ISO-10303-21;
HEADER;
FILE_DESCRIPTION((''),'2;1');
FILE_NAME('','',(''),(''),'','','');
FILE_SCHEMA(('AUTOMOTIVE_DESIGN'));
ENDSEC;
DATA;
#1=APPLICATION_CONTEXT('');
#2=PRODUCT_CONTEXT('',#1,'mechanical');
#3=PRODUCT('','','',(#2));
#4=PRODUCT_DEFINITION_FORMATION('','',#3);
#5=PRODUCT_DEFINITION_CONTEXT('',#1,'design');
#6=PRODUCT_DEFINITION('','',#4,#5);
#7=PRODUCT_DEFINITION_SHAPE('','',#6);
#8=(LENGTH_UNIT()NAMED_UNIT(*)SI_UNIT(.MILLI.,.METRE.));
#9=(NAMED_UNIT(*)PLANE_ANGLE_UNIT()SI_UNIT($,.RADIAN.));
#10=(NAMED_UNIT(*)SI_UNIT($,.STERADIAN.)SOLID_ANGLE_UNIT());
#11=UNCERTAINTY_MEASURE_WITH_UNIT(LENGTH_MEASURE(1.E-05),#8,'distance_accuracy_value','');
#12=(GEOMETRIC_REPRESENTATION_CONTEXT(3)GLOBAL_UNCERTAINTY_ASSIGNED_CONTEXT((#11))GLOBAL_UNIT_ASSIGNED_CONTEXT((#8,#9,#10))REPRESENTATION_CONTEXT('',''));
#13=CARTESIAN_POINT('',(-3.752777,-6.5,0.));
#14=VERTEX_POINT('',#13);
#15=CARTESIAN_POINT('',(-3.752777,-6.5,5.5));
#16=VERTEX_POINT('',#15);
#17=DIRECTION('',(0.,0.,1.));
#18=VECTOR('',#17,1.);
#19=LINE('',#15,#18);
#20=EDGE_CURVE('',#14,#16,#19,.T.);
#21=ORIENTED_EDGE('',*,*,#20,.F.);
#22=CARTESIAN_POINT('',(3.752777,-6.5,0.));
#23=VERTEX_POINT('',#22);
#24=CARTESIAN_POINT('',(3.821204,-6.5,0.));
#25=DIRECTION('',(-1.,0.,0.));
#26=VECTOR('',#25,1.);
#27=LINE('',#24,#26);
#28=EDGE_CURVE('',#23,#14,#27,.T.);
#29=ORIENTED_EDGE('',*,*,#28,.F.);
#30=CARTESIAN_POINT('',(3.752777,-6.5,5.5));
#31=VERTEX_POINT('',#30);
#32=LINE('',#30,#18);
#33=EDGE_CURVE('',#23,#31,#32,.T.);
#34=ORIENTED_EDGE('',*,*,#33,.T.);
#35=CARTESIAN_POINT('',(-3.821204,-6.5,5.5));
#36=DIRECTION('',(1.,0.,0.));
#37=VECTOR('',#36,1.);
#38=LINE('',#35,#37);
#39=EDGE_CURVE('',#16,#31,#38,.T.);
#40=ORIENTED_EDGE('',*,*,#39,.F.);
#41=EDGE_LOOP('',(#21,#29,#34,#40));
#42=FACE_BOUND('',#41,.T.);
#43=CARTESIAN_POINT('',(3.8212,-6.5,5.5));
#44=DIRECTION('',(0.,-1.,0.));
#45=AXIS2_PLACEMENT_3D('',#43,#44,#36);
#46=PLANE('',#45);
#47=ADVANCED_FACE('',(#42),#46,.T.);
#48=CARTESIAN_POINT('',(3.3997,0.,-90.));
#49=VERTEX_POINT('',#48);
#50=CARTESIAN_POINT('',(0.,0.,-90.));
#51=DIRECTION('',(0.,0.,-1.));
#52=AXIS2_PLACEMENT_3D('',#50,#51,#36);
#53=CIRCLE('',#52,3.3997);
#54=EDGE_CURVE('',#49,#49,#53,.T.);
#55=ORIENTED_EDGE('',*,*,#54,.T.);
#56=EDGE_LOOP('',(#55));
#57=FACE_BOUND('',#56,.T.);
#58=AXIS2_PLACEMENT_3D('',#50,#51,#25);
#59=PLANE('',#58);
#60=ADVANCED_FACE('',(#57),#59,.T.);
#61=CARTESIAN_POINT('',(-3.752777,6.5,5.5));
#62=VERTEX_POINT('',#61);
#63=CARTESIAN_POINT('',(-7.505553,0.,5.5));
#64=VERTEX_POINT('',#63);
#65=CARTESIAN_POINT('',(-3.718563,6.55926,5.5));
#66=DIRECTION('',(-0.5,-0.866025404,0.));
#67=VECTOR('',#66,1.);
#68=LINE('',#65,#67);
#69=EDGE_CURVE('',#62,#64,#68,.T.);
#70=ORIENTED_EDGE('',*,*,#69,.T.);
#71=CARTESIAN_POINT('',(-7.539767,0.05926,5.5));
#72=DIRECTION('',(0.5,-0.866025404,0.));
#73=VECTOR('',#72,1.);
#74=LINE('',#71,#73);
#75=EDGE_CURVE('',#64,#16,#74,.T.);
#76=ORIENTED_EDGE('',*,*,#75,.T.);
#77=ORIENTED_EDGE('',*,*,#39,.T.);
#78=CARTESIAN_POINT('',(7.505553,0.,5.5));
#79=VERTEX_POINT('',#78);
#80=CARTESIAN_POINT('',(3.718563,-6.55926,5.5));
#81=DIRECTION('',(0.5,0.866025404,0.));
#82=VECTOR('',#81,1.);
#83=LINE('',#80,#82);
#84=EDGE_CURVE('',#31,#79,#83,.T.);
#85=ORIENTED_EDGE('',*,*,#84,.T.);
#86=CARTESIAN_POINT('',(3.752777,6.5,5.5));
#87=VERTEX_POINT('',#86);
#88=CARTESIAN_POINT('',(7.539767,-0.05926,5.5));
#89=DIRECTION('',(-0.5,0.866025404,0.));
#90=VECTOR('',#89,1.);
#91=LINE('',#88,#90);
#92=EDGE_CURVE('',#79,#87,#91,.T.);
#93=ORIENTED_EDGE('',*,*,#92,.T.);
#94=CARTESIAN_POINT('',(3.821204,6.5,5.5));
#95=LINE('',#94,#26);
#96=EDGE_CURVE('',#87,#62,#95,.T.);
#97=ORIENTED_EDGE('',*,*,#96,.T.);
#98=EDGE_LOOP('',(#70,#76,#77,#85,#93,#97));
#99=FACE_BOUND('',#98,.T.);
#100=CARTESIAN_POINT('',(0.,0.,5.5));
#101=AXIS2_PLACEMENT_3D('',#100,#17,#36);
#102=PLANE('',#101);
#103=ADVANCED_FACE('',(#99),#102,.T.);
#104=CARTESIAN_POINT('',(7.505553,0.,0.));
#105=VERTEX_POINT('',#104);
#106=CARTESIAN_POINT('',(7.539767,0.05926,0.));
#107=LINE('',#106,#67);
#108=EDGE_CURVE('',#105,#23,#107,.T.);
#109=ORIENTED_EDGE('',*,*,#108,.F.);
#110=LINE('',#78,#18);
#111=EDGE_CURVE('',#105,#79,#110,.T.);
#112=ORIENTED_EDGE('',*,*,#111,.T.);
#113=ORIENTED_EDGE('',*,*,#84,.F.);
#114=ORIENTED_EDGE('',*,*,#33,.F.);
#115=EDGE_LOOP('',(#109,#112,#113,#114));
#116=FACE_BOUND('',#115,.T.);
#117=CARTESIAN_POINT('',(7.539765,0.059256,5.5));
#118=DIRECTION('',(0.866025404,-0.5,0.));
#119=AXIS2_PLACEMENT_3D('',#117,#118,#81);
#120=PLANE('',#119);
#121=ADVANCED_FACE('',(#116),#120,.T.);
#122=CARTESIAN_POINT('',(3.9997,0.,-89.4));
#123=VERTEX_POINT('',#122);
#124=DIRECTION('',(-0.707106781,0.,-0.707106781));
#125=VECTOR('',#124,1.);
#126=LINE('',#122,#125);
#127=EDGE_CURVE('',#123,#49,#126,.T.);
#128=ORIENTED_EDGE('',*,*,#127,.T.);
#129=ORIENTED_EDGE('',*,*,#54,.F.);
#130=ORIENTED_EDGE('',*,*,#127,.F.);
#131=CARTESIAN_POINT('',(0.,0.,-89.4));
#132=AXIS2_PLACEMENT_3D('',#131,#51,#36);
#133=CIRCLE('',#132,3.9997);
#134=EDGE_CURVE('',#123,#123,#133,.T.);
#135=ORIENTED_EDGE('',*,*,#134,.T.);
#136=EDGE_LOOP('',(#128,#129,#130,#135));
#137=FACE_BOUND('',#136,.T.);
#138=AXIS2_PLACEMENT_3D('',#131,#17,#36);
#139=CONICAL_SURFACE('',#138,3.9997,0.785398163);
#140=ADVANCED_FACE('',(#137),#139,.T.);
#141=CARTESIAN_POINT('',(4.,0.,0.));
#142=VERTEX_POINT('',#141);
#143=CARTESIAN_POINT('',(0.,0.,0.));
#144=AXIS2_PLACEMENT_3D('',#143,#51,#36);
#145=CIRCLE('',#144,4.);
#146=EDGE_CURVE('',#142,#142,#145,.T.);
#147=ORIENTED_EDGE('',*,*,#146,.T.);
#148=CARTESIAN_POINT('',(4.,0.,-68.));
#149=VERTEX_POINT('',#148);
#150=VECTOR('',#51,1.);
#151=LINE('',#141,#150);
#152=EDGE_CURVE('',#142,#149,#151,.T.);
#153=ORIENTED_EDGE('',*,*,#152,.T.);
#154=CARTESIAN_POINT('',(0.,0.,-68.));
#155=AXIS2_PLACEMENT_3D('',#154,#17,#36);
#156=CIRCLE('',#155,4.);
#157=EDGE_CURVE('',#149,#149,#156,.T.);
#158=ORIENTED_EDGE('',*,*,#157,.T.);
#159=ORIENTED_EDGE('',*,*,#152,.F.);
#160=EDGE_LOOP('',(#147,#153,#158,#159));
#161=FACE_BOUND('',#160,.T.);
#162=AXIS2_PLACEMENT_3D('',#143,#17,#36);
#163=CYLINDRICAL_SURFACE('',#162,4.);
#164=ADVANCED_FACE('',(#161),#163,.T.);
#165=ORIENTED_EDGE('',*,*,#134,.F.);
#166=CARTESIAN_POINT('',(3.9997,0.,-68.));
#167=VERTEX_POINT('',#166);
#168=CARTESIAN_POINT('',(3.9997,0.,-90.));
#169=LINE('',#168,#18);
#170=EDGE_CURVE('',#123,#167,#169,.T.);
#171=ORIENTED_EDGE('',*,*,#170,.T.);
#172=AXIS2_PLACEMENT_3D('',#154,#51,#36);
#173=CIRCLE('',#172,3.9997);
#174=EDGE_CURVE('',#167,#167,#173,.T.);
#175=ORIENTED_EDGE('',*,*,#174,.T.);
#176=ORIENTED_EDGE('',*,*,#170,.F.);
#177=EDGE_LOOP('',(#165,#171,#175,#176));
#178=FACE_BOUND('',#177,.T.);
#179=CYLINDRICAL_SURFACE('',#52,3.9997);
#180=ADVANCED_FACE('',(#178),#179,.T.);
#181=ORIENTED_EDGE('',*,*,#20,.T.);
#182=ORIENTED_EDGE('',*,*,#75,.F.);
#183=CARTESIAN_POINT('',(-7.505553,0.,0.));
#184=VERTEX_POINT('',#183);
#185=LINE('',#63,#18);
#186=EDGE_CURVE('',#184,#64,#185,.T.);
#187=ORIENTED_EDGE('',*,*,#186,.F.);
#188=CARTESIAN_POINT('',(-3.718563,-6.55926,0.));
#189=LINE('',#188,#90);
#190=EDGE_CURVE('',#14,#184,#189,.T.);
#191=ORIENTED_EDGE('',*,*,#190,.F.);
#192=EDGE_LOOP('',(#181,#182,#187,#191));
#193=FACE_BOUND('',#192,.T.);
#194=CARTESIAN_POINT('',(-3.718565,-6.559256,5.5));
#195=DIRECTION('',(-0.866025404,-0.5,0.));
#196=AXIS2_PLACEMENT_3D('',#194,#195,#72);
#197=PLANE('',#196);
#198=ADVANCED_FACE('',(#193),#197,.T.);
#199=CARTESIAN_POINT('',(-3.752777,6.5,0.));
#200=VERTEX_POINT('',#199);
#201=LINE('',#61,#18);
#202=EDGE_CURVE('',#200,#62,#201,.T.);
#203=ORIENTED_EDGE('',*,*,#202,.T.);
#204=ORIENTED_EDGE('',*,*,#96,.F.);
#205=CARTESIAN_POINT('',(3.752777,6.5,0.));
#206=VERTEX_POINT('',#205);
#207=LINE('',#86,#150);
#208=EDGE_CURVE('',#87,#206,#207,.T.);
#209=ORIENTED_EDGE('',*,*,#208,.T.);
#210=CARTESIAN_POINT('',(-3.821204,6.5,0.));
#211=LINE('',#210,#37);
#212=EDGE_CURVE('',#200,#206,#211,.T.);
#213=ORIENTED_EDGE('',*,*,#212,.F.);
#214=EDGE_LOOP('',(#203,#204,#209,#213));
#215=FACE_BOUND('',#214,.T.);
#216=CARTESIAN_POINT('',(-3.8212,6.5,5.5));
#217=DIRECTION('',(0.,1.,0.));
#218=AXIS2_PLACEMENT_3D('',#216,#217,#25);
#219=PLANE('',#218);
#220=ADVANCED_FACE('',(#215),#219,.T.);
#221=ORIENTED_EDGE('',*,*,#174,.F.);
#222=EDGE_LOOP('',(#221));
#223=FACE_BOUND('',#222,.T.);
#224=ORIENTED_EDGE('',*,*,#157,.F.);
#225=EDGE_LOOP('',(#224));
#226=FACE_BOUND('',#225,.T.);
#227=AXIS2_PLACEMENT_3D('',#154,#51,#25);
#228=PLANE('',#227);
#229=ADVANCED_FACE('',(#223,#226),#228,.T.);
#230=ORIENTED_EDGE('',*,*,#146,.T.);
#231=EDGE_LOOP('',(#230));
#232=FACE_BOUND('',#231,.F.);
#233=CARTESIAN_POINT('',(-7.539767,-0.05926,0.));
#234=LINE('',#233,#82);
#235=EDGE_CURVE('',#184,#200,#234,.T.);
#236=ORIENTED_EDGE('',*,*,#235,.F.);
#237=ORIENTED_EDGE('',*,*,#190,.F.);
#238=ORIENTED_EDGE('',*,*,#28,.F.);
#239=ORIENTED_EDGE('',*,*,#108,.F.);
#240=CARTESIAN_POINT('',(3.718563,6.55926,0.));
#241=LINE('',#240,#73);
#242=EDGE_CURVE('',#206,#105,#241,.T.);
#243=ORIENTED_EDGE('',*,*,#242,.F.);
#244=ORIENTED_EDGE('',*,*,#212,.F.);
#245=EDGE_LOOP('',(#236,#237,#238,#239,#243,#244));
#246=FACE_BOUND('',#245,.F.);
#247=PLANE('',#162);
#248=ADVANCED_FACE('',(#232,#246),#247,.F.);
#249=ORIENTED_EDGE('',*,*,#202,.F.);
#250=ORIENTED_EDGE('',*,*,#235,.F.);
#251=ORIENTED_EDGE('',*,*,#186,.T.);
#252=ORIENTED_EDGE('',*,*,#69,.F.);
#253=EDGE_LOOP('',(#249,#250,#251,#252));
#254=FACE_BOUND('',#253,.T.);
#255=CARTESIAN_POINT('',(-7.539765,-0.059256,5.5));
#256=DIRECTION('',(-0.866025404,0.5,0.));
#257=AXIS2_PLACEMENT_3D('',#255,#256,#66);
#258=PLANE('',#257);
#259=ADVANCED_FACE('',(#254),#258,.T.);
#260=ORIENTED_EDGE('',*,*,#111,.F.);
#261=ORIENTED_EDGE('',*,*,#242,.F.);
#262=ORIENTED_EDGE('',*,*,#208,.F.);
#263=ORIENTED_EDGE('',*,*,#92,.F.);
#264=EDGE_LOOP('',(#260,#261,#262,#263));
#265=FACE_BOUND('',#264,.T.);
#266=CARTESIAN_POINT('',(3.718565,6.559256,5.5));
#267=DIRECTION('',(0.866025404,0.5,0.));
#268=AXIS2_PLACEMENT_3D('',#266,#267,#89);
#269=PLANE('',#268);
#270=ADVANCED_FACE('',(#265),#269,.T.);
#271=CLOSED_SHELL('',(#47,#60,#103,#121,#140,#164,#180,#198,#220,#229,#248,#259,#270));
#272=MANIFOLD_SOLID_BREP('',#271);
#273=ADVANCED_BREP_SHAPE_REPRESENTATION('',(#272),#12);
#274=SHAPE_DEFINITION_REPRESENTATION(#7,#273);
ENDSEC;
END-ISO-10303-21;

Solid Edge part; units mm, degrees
sketch "Sketch1" plane through (0, 0, 0) normal (0, 0, 1) x (1, 0, 0)
  circle A0 centre (0, 0) radius 7.54
  dimension "D1" = 15.08
extrude "Protrusion1" add sketch "Sketch1" along normal blind 5.5
sketch "Sketch2" plane through (0, 0, 0) normal (0, 0, -1) x (1, 0, 0)
  circle A0 centre (0, 0) radius 4
extrude "Protrusion2" add sketch "Sketch2" along normal blind 90
sketch "Sketch3" plane through (0, 0, -90) normal (0, 0, -1) x (1, 0, 0)
  circle A0 centre (0, 0) radius 3.9997
extrude "Cutout1" cut sketch "Sketch3" against normal blind 22 flip side to cut
chamfer "Chamfer_1" distance 0.6 angle 45 1 edges at (-3.9997, 0, -90)
sketch "Sketch4" plane through (0, 0, 5.5) normal (0, 0, 1) x (1, 0, 0)
  line L0 (-3.8212, 6.5) -> (3.8212, 6.5)
  dimension "D1" = 13
extrude "Cutout2" cut sketch "Sketch4" against normal up to next material side at (0, 6.55, 5.5)
pattern_circular "Pattern1" count 6 over 360 about axis through (0, 0, 5.5) along (0, 0, 1) of "Cutout2"
properties part number "24104775"
